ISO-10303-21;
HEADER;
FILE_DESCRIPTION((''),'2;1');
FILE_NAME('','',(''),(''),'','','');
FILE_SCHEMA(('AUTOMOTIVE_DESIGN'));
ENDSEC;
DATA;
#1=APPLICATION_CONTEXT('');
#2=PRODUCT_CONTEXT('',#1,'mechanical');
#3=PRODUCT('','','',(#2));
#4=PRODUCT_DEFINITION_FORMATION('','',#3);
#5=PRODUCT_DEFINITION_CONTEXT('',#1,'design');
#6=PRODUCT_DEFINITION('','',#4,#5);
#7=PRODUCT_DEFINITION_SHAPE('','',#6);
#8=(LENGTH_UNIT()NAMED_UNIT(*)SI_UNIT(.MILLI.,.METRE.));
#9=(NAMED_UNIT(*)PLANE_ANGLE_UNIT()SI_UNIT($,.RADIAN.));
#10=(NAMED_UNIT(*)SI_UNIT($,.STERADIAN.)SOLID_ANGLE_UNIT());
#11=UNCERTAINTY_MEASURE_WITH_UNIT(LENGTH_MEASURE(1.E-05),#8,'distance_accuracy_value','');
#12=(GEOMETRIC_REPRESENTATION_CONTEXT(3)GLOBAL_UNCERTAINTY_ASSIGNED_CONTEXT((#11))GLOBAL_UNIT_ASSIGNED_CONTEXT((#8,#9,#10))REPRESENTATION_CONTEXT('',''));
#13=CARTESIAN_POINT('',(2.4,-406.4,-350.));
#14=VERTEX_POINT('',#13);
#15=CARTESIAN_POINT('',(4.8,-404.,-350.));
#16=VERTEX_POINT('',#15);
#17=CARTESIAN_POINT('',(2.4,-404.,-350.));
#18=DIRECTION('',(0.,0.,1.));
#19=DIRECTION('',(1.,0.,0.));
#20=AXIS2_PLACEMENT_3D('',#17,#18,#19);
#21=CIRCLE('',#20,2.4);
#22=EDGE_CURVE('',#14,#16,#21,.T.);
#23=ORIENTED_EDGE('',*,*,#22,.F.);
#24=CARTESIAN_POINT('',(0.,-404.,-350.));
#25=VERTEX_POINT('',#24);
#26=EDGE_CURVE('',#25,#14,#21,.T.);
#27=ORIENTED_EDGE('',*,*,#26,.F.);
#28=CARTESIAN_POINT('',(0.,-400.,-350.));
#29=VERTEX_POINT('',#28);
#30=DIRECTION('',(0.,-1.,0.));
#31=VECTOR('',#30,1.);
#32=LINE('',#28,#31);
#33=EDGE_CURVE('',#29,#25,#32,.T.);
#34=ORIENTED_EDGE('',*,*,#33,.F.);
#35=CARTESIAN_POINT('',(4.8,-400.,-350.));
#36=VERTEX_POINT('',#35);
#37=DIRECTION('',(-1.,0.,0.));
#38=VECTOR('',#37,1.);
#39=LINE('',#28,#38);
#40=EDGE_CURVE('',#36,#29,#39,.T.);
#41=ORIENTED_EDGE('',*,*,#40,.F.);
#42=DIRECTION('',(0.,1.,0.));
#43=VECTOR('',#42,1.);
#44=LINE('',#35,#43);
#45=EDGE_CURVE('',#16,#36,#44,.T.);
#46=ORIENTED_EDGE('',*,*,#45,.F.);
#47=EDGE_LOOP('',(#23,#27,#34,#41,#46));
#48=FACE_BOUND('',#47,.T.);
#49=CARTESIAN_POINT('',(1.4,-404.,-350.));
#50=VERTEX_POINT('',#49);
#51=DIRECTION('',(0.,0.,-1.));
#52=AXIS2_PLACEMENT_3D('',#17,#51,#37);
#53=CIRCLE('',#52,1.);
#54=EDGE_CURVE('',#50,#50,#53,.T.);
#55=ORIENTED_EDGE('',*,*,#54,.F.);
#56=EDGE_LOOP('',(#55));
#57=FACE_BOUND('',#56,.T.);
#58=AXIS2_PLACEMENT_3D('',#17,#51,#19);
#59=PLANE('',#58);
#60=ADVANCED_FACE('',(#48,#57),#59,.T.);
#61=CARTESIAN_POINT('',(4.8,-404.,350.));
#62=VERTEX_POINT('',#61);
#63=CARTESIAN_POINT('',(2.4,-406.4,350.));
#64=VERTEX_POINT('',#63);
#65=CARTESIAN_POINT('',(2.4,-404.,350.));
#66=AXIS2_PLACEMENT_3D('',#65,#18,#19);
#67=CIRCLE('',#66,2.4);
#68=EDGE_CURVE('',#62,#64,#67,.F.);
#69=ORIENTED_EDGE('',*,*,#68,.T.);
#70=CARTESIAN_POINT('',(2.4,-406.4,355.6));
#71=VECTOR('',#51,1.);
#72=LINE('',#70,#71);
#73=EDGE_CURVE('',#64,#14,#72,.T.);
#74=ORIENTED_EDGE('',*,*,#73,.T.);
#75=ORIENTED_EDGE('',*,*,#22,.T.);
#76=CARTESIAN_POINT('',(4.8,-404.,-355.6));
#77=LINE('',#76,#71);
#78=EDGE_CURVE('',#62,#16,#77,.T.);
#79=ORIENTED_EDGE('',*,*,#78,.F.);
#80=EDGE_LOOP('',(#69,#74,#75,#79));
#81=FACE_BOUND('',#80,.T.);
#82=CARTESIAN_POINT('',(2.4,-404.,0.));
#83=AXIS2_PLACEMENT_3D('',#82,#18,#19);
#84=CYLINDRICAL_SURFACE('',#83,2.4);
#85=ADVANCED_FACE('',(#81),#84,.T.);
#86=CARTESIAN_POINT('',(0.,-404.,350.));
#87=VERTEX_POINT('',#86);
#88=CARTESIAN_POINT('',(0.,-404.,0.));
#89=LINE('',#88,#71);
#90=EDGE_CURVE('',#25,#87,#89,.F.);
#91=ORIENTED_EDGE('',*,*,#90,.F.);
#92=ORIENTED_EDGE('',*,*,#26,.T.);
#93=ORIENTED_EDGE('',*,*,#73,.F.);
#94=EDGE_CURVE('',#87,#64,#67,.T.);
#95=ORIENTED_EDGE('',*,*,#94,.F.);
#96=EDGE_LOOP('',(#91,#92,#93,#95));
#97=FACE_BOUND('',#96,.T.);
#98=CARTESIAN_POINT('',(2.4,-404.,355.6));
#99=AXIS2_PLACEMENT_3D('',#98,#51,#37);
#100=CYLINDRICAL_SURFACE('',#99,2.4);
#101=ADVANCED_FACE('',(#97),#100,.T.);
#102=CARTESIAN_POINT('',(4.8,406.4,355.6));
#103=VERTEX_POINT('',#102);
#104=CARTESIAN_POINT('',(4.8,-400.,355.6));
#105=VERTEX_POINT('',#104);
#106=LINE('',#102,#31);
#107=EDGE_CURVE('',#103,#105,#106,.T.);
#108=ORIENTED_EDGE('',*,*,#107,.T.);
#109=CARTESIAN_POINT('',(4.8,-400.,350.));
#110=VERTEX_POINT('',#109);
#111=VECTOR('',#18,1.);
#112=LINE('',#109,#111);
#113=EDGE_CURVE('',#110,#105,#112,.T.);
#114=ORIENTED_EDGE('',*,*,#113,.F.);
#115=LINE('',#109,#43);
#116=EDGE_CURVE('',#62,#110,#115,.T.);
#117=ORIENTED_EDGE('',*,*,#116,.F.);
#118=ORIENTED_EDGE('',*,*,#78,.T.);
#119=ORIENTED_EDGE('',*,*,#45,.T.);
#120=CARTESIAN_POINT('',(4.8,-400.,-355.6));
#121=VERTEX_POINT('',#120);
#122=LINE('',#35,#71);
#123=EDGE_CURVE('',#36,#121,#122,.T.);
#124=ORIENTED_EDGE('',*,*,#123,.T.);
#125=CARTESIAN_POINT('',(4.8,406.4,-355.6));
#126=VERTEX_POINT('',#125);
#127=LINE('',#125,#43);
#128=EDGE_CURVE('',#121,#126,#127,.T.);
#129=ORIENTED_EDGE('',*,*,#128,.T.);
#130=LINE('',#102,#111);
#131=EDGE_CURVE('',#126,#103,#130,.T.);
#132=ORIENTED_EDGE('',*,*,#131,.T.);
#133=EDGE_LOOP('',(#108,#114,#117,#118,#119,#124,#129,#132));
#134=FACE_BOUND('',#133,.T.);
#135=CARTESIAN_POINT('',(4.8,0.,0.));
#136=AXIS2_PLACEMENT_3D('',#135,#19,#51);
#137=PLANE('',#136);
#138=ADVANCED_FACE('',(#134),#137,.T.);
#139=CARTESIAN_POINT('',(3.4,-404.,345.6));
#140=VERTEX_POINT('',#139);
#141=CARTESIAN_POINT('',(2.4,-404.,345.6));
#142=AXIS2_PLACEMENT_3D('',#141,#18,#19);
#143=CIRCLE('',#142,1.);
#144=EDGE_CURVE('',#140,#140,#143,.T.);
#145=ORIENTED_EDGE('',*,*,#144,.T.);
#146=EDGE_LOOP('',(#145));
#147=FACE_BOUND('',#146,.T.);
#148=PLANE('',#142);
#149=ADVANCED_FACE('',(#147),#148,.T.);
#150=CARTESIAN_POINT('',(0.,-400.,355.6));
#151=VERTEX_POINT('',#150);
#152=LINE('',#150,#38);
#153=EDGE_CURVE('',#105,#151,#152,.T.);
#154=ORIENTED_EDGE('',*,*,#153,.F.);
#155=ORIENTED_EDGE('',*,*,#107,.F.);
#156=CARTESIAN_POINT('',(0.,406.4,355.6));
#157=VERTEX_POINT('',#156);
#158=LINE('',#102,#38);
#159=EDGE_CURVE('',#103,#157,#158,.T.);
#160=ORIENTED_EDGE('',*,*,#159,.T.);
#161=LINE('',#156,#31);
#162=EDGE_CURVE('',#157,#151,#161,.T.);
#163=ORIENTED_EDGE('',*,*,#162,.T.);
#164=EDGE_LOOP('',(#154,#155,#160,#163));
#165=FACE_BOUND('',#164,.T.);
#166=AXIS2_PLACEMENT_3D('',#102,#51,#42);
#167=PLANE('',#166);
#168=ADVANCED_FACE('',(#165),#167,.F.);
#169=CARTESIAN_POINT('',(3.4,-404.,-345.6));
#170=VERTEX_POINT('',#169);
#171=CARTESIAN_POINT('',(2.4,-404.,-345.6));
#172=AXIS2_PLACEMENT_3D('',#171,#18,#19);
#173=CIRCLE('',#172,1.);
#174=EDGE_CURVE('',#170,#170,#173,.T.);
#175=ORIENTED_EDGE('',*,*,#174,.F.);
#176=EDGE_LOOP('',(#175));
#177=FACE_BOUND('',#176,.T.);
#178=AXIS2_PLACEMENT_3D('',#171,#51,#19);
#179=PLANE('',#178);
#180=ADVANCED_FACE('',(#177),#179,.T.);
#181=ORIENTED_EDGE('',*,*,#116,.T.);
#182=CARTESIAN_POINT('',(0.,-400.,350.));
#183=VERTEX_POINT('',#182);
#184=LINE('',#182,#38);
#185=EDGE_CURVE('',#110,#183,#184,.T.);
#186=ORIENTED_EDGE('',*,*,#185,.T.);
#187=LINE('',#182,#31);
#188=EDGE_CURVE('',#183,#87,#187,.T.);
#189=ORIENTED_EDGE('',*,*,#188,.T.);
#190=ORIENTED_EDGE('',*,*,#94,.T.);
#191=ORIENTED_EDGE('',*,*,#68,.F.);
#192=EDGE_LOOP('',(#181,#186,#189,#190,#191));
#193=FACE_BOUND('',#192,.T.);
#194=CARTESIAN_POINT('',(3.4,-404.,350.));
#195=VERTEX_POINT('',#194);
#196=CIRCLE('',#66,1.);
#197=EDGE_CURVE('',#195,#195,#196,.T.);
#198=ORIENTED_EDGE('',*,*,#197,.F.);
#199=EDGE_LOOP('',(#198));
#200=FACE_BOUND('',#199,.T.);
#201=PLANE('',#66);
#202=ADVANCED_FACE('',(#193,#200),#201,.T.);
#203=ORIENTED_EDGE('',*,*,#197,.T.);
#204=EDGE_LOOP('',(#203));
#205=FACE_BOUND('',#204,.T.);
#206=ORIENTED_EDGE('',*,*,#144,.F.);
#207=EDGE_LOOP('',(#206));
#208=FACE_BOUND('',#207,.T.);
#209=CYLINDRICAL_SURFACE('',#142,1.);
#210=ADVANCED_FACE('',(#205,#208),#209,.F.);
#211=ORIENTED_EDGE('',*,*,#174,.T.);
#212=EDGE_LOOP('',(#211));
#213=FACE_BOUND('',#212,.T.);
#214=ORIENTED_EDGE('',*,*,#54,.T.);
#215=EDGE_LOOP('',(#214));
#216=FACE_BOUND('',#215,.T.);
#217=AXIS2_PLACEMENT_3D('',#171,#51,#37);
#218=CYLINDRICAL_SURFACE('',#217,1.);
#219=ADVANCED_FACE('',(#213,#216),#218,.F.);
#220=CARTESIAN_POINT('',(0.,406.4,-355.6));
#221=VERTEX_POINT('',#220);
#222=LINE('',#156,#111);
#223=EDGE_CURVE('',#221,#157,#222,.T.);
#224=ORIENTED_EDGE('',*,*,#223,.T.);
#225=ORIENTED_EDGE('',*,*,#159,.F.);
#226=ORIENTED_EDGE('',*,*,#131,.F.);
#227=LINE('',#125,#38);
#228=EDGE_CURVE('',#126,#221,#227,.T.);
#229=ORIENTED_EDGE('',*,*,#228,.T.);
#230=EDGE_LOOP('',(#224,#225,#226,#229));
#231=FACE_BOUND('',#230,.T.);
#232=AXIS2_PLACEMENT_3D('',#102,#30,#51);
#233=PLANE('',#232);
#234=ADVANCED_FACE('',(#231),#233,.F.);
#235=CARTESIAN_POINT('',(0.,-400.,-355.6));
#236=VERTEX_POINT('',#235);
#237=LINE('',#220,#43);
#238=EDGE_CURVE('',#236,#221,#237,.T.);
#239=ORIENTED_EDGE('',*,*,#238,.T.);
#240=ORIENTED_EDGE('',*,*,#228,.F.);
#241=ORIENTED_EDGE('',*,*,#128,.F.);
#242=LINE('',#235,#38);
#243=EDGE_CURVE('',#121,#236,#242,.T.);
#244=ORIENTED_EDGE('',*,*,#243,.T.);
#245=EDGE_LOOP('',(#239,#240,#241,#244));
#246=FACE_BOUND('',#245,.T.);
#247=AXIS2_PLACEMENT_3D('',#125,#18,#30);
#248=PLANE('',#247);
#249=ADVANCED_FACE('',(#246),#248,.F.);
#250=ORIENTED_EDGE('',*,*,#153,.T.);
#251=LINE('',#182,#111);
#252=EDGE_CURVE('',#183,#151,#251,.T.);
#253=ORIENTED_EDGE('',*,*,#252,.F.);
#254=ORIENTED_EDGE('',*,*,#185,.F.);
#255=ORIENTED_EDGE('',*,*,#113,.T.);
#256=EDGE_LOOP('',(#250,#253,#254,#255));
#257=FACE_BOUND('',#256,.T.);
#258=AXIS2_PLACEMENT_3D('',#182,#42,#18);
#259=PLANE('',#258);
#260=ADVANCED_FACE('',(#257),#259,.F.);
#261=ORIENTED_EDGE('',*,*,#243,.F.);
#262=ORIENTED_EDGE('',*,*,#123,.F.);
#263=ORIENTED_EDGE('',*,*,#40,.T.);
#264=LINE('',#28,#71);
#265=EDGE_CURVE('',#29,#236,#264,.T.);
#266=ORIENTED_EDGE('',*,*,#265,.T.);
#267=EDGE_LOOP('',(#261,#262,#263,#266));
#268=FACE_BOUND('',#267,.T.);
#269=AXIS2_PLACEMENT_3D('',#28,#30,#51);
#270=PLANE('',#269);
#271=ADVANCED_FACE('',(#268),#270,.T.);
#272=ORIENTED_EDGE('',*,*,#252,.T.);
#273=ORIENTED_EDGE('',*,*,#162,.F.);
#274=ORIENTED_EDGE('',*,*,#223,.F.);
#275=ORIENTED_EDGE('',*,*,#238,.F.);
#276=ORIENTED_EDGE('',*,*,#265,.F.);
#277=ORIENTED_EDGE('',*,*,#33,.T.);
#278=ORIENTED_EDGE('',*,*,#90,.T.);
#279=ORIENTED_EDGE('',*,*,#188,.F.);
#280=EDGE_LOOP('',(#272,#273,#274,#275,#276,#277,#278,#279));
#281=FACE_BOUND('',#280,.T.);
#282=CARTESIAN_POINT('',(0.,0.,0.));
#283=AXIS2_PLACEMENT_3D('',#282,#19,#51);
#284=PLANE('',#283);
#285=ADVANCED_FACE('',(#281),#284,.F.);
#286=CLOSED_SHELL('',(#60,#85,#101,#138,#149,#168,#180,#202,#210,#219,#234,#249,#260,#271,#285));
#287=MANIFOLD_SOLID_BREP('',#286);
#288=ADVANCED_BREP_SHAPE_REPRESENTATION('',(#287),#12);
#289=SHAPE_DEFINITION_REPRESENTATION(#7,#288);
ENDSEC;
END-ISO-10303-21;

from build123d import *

# Parameters (mm, degrees)
SKETCH1_W              = 711.2
SKETCH1_H              = 812.8
BOSS_EXTRUDE1_DEPTH    = 4.8
FILLET1_R              = 2.4
CUT_EXTRUDE3_START     = -5.6
CUT_EXTRUDE3_OUTLINE_W = 5
CUT_EXTRUDE3_OUTLINE_H = 7
CUT_EXTRUDE3_DEPTH     = 5.6
SKETCH2_R              = 1
CUT_EXTRUDE1_DEPTH     = 10


# Read off the part's stored shape, not the designer's step: Cut-Extrude3
with BuildPart() as part:
    # Sketch1 → Boss-Extrude1 (new body)
    with BuildSketch(Plane(origin=(0, 0, 0), x_dir=(0, 0, -1), z_dir=(1, 0, 0))):
        Rectangle(SKETCH1_W, SKETCH1_H)
    extrude(amount=BOSS_EXTRUDE1_DEPTH)

    # Fillet1
    fillet1_edges = [part.edges().sort_by_distance(p)[0] for p in [
        (4.8, -406.4, 0),
        (0, -406.4, 0),
    ]]
    fillet(fillet1_edges, radius=FILLET1_R - 0.0001)  # a hair under: the kernel refuses the full size

    # Cut-Extrude3 outline → Cut-Extrude3 (cut)
    with BuildSketch(Plane.XY.offset(355.6).offset(CUT_EXTRUDE3_START)):
        with Locations((2.5, -403.5)):
            Rectangle(CUT_EXTRUDE3_OUTLINE_W, CUT_EXTRUDE3_OUTLINE_H)
    cut_extrude3 = extrude(amount=CUT_EXTRUDE3_DEPTH, mode=Mode.SUBTRACT)

    # Sketch2 → Cut-Extrude1 (cut)
    with BuildSketch(Plane.XY.offset(355.6)):
        with Locations((2.4, -404)):
            Circle(SKETCH2_R)
    cut_extrude1 = extrude(amount=-CUT_EXTRUDE1_DEPTH, mode=Mode.SUBTRACT)

    # Mirror1: Cut-Extrude1 across plane
    add(cut_extrude1.mirror(Plane.XY), mode=Mode.SUBTRACT)

    # Mirror4: Cut-Extrude3 across plane
    add(cut_extrude3.mirror(Plane.XY), mode=Mode.SUBTRACT)


solid = part.part
